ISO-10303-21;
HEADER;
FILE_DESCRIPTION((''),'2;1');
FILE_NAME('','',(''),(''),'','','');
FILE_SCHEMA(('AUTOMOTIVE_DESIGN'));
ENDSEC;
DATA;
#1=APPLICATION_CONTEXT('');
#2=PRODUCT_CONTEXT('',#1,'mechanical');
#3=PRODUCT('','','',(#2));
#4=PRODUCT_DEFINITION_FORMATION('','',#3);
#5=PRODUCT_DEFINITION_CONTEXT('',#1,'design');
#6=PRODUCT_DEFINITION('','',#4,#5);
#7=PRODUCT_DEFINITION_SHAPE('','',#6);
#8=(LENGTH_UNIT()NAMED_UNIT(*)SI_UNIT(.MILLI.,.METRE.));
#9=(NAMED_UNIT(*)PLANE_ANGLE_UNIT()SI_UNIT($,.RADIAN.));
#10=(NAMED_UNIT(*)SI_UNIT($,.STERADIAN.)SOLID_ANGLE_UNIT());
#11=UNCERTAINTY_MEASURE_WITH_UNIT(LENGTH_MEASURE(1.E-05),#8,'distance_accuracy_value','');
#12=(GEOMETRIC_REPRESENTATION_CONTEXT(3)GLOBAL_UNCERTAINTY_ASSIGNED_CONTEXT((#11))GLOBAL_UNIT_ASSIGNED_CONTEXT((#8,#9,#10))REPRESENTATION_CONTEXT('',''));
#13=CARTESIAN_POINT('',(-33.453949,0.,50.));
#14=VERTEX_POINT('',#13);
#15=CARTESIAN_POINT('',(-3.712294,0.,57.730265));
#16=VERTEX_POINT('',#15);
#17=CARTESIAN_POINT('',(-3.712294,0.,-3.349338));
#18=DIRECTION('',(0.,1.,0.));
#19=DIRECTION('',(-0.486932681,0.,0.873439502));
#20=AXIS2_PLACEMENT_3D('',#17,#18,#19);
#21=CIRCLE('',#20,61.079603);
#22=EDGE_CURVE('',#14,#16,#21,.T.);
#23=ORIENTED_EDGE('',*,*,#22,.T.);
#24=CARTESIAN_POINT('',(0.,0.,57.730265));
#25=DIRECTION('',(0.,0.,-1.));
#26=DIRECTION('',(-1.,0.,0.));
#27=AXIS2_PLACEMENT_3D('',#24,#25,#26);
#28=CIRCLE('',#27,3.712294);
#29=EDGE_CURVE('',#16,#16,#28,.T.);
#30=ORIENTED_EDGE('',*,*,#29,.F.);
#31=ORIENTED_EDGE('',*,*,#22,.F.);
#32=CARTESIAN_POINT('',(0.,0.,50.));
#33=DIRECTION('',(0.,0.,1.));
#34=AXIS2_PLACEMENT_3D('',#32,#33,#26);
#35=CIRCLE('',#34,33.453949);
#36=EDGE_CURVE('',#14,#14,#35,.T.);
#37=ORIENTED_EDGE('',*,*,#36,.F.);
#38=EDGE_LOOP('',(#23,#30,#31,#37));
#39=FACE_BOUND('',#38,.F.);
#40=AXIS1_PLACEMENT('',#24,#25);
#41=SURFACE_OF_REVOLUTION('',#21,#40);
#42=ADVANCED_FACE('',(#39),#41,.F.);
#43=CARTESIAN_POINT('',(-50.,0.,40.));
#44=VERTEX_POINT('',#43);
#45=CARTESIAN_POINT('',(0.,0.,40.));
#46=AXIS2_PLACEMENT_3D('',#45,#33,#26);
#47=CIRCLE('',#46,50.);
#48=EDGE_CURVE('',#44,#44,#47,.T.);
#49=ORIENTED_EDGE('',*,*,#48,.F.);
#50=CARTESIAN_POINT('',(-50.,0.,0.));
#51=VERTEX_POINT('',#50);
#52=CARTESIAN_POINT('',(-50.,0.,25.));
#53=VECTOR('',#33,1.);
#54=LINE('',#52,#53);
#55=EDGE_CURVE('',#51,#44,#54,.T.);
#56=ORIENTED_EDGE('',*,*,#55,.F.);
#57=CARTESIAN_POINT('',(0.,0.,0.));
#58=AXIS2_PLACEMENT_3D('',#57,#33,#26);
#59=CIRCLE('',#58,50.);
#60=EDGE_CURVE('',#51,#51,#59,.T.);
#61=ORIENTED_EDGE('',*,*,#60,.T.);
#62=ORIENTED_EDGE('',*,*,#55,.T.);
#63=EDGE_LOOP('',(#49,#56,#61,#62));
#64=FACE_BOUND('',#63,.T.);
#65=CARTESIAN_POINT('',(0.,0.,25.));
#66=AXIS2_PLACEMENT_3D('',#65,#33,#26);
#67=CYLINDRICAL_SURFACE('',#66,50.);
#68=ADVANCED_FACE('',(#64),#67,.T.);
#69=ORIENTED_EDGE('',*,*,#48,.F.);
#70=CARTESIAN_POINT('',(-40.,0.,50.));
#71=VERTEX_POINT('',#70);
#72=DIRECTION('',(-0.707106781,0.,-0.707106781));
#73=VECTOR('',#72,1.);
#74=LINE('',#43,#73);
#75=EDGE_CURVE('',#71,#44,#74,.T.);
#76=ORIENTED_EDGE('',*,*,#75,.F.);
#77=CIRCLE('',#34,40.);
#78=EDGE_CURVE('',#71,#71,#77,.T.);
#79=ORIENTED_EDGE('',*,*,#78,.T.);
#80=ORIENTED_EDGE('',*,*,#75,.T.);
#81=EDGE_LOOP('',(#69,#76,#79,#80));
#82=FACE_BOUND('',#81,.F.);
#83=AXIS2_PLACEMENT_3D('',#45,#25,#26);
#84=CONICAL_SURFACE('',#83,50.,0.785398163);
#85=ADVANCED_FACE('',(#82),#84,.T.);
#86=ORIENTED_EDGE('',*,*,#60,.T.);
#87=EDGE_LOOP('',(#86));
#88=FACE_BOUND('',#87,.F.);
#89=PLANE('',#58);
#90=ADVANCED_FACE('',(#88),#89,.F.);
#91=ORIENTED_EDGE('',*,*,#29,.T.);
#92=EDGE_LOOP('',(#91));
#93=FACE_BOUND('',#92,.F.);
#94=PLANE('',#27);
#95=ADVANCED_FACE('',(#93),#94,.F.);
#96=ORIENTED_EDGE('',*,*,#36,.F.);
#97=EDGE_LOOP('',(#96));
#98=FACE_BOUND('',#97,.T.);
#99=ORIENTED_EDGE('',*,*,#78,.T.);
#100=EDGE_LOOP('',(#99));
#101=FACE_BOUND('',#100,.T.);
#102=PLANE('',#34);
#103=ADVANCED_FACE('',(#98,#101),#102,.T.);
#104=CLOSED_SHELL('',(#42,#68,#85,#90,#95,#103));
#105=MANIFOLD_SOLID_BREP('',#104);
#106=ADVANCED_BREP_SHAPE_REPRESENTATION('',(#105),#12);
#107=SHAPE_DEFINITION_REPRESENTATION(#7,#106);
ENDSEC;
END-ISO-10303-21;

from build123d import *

# Parameters (mm, degrees)
F0_W    = 50
F0_H    = 50
F2_W    = 33.4539487958
F2_H    = 22.2039483488
F5_SIZE = 10


# Not quite as in the source:
# - a fillet or chamfer that OpenCascade refuses, or shapes differently, is made with other operations: its cross-section is extruded or revolved along the edge and cut away or added


with BuildPart() as f1:
    # F0 (on Front) → F1 (revolve)
    with BuildSketch(Plane.XZ):
        with Locations((-25, 25)):
            Rectangle(F0_W, F0_H)
    revolve(axis=Axis((0, 0, 25), (0, 0, 1)))

    # F2 (on Front) → F3 (revolve)
    with BuildSketch(Plane.XZ):
        with Locations((-16.7269743979, 46.6282907873)):
            Rectangle(F2_W, F2_H)
    revolve(axis=Axis((0, 0, 50), (0, 0, -1)))

    # F4: fillet of radius 61.079603128 on 1 edges, made by hand

    # F4_s1 → F4_t2 (revolve, cut)
    with BuildSketch(Plane.XZ):
        with BuildLine():
            ThreePointArc((-33.4539487958, 50), (-19.0772136264, 55.7661180216), (-3.7122939075, 57.7302649617))
            Line((-3.7122939075, 57.7302649617), (-33.4539487958, 57.7302649617))
            Line((-33.4539487958, 57.7302649617), (-33.4539487958, 50))
        make_face()
    revolve(axis=Axis((0, 0, 57.7302649617), (0, 0, -1)), mode=Mode.SUBTRACT)

    # F5
    f5_edges = [f1.edges().sort_by_distance(p)[0] for p in [
        (50, 0, 50),
    ]]
    chamfer(f5_edges, length=F5_SIZE)


solid = f1.part
